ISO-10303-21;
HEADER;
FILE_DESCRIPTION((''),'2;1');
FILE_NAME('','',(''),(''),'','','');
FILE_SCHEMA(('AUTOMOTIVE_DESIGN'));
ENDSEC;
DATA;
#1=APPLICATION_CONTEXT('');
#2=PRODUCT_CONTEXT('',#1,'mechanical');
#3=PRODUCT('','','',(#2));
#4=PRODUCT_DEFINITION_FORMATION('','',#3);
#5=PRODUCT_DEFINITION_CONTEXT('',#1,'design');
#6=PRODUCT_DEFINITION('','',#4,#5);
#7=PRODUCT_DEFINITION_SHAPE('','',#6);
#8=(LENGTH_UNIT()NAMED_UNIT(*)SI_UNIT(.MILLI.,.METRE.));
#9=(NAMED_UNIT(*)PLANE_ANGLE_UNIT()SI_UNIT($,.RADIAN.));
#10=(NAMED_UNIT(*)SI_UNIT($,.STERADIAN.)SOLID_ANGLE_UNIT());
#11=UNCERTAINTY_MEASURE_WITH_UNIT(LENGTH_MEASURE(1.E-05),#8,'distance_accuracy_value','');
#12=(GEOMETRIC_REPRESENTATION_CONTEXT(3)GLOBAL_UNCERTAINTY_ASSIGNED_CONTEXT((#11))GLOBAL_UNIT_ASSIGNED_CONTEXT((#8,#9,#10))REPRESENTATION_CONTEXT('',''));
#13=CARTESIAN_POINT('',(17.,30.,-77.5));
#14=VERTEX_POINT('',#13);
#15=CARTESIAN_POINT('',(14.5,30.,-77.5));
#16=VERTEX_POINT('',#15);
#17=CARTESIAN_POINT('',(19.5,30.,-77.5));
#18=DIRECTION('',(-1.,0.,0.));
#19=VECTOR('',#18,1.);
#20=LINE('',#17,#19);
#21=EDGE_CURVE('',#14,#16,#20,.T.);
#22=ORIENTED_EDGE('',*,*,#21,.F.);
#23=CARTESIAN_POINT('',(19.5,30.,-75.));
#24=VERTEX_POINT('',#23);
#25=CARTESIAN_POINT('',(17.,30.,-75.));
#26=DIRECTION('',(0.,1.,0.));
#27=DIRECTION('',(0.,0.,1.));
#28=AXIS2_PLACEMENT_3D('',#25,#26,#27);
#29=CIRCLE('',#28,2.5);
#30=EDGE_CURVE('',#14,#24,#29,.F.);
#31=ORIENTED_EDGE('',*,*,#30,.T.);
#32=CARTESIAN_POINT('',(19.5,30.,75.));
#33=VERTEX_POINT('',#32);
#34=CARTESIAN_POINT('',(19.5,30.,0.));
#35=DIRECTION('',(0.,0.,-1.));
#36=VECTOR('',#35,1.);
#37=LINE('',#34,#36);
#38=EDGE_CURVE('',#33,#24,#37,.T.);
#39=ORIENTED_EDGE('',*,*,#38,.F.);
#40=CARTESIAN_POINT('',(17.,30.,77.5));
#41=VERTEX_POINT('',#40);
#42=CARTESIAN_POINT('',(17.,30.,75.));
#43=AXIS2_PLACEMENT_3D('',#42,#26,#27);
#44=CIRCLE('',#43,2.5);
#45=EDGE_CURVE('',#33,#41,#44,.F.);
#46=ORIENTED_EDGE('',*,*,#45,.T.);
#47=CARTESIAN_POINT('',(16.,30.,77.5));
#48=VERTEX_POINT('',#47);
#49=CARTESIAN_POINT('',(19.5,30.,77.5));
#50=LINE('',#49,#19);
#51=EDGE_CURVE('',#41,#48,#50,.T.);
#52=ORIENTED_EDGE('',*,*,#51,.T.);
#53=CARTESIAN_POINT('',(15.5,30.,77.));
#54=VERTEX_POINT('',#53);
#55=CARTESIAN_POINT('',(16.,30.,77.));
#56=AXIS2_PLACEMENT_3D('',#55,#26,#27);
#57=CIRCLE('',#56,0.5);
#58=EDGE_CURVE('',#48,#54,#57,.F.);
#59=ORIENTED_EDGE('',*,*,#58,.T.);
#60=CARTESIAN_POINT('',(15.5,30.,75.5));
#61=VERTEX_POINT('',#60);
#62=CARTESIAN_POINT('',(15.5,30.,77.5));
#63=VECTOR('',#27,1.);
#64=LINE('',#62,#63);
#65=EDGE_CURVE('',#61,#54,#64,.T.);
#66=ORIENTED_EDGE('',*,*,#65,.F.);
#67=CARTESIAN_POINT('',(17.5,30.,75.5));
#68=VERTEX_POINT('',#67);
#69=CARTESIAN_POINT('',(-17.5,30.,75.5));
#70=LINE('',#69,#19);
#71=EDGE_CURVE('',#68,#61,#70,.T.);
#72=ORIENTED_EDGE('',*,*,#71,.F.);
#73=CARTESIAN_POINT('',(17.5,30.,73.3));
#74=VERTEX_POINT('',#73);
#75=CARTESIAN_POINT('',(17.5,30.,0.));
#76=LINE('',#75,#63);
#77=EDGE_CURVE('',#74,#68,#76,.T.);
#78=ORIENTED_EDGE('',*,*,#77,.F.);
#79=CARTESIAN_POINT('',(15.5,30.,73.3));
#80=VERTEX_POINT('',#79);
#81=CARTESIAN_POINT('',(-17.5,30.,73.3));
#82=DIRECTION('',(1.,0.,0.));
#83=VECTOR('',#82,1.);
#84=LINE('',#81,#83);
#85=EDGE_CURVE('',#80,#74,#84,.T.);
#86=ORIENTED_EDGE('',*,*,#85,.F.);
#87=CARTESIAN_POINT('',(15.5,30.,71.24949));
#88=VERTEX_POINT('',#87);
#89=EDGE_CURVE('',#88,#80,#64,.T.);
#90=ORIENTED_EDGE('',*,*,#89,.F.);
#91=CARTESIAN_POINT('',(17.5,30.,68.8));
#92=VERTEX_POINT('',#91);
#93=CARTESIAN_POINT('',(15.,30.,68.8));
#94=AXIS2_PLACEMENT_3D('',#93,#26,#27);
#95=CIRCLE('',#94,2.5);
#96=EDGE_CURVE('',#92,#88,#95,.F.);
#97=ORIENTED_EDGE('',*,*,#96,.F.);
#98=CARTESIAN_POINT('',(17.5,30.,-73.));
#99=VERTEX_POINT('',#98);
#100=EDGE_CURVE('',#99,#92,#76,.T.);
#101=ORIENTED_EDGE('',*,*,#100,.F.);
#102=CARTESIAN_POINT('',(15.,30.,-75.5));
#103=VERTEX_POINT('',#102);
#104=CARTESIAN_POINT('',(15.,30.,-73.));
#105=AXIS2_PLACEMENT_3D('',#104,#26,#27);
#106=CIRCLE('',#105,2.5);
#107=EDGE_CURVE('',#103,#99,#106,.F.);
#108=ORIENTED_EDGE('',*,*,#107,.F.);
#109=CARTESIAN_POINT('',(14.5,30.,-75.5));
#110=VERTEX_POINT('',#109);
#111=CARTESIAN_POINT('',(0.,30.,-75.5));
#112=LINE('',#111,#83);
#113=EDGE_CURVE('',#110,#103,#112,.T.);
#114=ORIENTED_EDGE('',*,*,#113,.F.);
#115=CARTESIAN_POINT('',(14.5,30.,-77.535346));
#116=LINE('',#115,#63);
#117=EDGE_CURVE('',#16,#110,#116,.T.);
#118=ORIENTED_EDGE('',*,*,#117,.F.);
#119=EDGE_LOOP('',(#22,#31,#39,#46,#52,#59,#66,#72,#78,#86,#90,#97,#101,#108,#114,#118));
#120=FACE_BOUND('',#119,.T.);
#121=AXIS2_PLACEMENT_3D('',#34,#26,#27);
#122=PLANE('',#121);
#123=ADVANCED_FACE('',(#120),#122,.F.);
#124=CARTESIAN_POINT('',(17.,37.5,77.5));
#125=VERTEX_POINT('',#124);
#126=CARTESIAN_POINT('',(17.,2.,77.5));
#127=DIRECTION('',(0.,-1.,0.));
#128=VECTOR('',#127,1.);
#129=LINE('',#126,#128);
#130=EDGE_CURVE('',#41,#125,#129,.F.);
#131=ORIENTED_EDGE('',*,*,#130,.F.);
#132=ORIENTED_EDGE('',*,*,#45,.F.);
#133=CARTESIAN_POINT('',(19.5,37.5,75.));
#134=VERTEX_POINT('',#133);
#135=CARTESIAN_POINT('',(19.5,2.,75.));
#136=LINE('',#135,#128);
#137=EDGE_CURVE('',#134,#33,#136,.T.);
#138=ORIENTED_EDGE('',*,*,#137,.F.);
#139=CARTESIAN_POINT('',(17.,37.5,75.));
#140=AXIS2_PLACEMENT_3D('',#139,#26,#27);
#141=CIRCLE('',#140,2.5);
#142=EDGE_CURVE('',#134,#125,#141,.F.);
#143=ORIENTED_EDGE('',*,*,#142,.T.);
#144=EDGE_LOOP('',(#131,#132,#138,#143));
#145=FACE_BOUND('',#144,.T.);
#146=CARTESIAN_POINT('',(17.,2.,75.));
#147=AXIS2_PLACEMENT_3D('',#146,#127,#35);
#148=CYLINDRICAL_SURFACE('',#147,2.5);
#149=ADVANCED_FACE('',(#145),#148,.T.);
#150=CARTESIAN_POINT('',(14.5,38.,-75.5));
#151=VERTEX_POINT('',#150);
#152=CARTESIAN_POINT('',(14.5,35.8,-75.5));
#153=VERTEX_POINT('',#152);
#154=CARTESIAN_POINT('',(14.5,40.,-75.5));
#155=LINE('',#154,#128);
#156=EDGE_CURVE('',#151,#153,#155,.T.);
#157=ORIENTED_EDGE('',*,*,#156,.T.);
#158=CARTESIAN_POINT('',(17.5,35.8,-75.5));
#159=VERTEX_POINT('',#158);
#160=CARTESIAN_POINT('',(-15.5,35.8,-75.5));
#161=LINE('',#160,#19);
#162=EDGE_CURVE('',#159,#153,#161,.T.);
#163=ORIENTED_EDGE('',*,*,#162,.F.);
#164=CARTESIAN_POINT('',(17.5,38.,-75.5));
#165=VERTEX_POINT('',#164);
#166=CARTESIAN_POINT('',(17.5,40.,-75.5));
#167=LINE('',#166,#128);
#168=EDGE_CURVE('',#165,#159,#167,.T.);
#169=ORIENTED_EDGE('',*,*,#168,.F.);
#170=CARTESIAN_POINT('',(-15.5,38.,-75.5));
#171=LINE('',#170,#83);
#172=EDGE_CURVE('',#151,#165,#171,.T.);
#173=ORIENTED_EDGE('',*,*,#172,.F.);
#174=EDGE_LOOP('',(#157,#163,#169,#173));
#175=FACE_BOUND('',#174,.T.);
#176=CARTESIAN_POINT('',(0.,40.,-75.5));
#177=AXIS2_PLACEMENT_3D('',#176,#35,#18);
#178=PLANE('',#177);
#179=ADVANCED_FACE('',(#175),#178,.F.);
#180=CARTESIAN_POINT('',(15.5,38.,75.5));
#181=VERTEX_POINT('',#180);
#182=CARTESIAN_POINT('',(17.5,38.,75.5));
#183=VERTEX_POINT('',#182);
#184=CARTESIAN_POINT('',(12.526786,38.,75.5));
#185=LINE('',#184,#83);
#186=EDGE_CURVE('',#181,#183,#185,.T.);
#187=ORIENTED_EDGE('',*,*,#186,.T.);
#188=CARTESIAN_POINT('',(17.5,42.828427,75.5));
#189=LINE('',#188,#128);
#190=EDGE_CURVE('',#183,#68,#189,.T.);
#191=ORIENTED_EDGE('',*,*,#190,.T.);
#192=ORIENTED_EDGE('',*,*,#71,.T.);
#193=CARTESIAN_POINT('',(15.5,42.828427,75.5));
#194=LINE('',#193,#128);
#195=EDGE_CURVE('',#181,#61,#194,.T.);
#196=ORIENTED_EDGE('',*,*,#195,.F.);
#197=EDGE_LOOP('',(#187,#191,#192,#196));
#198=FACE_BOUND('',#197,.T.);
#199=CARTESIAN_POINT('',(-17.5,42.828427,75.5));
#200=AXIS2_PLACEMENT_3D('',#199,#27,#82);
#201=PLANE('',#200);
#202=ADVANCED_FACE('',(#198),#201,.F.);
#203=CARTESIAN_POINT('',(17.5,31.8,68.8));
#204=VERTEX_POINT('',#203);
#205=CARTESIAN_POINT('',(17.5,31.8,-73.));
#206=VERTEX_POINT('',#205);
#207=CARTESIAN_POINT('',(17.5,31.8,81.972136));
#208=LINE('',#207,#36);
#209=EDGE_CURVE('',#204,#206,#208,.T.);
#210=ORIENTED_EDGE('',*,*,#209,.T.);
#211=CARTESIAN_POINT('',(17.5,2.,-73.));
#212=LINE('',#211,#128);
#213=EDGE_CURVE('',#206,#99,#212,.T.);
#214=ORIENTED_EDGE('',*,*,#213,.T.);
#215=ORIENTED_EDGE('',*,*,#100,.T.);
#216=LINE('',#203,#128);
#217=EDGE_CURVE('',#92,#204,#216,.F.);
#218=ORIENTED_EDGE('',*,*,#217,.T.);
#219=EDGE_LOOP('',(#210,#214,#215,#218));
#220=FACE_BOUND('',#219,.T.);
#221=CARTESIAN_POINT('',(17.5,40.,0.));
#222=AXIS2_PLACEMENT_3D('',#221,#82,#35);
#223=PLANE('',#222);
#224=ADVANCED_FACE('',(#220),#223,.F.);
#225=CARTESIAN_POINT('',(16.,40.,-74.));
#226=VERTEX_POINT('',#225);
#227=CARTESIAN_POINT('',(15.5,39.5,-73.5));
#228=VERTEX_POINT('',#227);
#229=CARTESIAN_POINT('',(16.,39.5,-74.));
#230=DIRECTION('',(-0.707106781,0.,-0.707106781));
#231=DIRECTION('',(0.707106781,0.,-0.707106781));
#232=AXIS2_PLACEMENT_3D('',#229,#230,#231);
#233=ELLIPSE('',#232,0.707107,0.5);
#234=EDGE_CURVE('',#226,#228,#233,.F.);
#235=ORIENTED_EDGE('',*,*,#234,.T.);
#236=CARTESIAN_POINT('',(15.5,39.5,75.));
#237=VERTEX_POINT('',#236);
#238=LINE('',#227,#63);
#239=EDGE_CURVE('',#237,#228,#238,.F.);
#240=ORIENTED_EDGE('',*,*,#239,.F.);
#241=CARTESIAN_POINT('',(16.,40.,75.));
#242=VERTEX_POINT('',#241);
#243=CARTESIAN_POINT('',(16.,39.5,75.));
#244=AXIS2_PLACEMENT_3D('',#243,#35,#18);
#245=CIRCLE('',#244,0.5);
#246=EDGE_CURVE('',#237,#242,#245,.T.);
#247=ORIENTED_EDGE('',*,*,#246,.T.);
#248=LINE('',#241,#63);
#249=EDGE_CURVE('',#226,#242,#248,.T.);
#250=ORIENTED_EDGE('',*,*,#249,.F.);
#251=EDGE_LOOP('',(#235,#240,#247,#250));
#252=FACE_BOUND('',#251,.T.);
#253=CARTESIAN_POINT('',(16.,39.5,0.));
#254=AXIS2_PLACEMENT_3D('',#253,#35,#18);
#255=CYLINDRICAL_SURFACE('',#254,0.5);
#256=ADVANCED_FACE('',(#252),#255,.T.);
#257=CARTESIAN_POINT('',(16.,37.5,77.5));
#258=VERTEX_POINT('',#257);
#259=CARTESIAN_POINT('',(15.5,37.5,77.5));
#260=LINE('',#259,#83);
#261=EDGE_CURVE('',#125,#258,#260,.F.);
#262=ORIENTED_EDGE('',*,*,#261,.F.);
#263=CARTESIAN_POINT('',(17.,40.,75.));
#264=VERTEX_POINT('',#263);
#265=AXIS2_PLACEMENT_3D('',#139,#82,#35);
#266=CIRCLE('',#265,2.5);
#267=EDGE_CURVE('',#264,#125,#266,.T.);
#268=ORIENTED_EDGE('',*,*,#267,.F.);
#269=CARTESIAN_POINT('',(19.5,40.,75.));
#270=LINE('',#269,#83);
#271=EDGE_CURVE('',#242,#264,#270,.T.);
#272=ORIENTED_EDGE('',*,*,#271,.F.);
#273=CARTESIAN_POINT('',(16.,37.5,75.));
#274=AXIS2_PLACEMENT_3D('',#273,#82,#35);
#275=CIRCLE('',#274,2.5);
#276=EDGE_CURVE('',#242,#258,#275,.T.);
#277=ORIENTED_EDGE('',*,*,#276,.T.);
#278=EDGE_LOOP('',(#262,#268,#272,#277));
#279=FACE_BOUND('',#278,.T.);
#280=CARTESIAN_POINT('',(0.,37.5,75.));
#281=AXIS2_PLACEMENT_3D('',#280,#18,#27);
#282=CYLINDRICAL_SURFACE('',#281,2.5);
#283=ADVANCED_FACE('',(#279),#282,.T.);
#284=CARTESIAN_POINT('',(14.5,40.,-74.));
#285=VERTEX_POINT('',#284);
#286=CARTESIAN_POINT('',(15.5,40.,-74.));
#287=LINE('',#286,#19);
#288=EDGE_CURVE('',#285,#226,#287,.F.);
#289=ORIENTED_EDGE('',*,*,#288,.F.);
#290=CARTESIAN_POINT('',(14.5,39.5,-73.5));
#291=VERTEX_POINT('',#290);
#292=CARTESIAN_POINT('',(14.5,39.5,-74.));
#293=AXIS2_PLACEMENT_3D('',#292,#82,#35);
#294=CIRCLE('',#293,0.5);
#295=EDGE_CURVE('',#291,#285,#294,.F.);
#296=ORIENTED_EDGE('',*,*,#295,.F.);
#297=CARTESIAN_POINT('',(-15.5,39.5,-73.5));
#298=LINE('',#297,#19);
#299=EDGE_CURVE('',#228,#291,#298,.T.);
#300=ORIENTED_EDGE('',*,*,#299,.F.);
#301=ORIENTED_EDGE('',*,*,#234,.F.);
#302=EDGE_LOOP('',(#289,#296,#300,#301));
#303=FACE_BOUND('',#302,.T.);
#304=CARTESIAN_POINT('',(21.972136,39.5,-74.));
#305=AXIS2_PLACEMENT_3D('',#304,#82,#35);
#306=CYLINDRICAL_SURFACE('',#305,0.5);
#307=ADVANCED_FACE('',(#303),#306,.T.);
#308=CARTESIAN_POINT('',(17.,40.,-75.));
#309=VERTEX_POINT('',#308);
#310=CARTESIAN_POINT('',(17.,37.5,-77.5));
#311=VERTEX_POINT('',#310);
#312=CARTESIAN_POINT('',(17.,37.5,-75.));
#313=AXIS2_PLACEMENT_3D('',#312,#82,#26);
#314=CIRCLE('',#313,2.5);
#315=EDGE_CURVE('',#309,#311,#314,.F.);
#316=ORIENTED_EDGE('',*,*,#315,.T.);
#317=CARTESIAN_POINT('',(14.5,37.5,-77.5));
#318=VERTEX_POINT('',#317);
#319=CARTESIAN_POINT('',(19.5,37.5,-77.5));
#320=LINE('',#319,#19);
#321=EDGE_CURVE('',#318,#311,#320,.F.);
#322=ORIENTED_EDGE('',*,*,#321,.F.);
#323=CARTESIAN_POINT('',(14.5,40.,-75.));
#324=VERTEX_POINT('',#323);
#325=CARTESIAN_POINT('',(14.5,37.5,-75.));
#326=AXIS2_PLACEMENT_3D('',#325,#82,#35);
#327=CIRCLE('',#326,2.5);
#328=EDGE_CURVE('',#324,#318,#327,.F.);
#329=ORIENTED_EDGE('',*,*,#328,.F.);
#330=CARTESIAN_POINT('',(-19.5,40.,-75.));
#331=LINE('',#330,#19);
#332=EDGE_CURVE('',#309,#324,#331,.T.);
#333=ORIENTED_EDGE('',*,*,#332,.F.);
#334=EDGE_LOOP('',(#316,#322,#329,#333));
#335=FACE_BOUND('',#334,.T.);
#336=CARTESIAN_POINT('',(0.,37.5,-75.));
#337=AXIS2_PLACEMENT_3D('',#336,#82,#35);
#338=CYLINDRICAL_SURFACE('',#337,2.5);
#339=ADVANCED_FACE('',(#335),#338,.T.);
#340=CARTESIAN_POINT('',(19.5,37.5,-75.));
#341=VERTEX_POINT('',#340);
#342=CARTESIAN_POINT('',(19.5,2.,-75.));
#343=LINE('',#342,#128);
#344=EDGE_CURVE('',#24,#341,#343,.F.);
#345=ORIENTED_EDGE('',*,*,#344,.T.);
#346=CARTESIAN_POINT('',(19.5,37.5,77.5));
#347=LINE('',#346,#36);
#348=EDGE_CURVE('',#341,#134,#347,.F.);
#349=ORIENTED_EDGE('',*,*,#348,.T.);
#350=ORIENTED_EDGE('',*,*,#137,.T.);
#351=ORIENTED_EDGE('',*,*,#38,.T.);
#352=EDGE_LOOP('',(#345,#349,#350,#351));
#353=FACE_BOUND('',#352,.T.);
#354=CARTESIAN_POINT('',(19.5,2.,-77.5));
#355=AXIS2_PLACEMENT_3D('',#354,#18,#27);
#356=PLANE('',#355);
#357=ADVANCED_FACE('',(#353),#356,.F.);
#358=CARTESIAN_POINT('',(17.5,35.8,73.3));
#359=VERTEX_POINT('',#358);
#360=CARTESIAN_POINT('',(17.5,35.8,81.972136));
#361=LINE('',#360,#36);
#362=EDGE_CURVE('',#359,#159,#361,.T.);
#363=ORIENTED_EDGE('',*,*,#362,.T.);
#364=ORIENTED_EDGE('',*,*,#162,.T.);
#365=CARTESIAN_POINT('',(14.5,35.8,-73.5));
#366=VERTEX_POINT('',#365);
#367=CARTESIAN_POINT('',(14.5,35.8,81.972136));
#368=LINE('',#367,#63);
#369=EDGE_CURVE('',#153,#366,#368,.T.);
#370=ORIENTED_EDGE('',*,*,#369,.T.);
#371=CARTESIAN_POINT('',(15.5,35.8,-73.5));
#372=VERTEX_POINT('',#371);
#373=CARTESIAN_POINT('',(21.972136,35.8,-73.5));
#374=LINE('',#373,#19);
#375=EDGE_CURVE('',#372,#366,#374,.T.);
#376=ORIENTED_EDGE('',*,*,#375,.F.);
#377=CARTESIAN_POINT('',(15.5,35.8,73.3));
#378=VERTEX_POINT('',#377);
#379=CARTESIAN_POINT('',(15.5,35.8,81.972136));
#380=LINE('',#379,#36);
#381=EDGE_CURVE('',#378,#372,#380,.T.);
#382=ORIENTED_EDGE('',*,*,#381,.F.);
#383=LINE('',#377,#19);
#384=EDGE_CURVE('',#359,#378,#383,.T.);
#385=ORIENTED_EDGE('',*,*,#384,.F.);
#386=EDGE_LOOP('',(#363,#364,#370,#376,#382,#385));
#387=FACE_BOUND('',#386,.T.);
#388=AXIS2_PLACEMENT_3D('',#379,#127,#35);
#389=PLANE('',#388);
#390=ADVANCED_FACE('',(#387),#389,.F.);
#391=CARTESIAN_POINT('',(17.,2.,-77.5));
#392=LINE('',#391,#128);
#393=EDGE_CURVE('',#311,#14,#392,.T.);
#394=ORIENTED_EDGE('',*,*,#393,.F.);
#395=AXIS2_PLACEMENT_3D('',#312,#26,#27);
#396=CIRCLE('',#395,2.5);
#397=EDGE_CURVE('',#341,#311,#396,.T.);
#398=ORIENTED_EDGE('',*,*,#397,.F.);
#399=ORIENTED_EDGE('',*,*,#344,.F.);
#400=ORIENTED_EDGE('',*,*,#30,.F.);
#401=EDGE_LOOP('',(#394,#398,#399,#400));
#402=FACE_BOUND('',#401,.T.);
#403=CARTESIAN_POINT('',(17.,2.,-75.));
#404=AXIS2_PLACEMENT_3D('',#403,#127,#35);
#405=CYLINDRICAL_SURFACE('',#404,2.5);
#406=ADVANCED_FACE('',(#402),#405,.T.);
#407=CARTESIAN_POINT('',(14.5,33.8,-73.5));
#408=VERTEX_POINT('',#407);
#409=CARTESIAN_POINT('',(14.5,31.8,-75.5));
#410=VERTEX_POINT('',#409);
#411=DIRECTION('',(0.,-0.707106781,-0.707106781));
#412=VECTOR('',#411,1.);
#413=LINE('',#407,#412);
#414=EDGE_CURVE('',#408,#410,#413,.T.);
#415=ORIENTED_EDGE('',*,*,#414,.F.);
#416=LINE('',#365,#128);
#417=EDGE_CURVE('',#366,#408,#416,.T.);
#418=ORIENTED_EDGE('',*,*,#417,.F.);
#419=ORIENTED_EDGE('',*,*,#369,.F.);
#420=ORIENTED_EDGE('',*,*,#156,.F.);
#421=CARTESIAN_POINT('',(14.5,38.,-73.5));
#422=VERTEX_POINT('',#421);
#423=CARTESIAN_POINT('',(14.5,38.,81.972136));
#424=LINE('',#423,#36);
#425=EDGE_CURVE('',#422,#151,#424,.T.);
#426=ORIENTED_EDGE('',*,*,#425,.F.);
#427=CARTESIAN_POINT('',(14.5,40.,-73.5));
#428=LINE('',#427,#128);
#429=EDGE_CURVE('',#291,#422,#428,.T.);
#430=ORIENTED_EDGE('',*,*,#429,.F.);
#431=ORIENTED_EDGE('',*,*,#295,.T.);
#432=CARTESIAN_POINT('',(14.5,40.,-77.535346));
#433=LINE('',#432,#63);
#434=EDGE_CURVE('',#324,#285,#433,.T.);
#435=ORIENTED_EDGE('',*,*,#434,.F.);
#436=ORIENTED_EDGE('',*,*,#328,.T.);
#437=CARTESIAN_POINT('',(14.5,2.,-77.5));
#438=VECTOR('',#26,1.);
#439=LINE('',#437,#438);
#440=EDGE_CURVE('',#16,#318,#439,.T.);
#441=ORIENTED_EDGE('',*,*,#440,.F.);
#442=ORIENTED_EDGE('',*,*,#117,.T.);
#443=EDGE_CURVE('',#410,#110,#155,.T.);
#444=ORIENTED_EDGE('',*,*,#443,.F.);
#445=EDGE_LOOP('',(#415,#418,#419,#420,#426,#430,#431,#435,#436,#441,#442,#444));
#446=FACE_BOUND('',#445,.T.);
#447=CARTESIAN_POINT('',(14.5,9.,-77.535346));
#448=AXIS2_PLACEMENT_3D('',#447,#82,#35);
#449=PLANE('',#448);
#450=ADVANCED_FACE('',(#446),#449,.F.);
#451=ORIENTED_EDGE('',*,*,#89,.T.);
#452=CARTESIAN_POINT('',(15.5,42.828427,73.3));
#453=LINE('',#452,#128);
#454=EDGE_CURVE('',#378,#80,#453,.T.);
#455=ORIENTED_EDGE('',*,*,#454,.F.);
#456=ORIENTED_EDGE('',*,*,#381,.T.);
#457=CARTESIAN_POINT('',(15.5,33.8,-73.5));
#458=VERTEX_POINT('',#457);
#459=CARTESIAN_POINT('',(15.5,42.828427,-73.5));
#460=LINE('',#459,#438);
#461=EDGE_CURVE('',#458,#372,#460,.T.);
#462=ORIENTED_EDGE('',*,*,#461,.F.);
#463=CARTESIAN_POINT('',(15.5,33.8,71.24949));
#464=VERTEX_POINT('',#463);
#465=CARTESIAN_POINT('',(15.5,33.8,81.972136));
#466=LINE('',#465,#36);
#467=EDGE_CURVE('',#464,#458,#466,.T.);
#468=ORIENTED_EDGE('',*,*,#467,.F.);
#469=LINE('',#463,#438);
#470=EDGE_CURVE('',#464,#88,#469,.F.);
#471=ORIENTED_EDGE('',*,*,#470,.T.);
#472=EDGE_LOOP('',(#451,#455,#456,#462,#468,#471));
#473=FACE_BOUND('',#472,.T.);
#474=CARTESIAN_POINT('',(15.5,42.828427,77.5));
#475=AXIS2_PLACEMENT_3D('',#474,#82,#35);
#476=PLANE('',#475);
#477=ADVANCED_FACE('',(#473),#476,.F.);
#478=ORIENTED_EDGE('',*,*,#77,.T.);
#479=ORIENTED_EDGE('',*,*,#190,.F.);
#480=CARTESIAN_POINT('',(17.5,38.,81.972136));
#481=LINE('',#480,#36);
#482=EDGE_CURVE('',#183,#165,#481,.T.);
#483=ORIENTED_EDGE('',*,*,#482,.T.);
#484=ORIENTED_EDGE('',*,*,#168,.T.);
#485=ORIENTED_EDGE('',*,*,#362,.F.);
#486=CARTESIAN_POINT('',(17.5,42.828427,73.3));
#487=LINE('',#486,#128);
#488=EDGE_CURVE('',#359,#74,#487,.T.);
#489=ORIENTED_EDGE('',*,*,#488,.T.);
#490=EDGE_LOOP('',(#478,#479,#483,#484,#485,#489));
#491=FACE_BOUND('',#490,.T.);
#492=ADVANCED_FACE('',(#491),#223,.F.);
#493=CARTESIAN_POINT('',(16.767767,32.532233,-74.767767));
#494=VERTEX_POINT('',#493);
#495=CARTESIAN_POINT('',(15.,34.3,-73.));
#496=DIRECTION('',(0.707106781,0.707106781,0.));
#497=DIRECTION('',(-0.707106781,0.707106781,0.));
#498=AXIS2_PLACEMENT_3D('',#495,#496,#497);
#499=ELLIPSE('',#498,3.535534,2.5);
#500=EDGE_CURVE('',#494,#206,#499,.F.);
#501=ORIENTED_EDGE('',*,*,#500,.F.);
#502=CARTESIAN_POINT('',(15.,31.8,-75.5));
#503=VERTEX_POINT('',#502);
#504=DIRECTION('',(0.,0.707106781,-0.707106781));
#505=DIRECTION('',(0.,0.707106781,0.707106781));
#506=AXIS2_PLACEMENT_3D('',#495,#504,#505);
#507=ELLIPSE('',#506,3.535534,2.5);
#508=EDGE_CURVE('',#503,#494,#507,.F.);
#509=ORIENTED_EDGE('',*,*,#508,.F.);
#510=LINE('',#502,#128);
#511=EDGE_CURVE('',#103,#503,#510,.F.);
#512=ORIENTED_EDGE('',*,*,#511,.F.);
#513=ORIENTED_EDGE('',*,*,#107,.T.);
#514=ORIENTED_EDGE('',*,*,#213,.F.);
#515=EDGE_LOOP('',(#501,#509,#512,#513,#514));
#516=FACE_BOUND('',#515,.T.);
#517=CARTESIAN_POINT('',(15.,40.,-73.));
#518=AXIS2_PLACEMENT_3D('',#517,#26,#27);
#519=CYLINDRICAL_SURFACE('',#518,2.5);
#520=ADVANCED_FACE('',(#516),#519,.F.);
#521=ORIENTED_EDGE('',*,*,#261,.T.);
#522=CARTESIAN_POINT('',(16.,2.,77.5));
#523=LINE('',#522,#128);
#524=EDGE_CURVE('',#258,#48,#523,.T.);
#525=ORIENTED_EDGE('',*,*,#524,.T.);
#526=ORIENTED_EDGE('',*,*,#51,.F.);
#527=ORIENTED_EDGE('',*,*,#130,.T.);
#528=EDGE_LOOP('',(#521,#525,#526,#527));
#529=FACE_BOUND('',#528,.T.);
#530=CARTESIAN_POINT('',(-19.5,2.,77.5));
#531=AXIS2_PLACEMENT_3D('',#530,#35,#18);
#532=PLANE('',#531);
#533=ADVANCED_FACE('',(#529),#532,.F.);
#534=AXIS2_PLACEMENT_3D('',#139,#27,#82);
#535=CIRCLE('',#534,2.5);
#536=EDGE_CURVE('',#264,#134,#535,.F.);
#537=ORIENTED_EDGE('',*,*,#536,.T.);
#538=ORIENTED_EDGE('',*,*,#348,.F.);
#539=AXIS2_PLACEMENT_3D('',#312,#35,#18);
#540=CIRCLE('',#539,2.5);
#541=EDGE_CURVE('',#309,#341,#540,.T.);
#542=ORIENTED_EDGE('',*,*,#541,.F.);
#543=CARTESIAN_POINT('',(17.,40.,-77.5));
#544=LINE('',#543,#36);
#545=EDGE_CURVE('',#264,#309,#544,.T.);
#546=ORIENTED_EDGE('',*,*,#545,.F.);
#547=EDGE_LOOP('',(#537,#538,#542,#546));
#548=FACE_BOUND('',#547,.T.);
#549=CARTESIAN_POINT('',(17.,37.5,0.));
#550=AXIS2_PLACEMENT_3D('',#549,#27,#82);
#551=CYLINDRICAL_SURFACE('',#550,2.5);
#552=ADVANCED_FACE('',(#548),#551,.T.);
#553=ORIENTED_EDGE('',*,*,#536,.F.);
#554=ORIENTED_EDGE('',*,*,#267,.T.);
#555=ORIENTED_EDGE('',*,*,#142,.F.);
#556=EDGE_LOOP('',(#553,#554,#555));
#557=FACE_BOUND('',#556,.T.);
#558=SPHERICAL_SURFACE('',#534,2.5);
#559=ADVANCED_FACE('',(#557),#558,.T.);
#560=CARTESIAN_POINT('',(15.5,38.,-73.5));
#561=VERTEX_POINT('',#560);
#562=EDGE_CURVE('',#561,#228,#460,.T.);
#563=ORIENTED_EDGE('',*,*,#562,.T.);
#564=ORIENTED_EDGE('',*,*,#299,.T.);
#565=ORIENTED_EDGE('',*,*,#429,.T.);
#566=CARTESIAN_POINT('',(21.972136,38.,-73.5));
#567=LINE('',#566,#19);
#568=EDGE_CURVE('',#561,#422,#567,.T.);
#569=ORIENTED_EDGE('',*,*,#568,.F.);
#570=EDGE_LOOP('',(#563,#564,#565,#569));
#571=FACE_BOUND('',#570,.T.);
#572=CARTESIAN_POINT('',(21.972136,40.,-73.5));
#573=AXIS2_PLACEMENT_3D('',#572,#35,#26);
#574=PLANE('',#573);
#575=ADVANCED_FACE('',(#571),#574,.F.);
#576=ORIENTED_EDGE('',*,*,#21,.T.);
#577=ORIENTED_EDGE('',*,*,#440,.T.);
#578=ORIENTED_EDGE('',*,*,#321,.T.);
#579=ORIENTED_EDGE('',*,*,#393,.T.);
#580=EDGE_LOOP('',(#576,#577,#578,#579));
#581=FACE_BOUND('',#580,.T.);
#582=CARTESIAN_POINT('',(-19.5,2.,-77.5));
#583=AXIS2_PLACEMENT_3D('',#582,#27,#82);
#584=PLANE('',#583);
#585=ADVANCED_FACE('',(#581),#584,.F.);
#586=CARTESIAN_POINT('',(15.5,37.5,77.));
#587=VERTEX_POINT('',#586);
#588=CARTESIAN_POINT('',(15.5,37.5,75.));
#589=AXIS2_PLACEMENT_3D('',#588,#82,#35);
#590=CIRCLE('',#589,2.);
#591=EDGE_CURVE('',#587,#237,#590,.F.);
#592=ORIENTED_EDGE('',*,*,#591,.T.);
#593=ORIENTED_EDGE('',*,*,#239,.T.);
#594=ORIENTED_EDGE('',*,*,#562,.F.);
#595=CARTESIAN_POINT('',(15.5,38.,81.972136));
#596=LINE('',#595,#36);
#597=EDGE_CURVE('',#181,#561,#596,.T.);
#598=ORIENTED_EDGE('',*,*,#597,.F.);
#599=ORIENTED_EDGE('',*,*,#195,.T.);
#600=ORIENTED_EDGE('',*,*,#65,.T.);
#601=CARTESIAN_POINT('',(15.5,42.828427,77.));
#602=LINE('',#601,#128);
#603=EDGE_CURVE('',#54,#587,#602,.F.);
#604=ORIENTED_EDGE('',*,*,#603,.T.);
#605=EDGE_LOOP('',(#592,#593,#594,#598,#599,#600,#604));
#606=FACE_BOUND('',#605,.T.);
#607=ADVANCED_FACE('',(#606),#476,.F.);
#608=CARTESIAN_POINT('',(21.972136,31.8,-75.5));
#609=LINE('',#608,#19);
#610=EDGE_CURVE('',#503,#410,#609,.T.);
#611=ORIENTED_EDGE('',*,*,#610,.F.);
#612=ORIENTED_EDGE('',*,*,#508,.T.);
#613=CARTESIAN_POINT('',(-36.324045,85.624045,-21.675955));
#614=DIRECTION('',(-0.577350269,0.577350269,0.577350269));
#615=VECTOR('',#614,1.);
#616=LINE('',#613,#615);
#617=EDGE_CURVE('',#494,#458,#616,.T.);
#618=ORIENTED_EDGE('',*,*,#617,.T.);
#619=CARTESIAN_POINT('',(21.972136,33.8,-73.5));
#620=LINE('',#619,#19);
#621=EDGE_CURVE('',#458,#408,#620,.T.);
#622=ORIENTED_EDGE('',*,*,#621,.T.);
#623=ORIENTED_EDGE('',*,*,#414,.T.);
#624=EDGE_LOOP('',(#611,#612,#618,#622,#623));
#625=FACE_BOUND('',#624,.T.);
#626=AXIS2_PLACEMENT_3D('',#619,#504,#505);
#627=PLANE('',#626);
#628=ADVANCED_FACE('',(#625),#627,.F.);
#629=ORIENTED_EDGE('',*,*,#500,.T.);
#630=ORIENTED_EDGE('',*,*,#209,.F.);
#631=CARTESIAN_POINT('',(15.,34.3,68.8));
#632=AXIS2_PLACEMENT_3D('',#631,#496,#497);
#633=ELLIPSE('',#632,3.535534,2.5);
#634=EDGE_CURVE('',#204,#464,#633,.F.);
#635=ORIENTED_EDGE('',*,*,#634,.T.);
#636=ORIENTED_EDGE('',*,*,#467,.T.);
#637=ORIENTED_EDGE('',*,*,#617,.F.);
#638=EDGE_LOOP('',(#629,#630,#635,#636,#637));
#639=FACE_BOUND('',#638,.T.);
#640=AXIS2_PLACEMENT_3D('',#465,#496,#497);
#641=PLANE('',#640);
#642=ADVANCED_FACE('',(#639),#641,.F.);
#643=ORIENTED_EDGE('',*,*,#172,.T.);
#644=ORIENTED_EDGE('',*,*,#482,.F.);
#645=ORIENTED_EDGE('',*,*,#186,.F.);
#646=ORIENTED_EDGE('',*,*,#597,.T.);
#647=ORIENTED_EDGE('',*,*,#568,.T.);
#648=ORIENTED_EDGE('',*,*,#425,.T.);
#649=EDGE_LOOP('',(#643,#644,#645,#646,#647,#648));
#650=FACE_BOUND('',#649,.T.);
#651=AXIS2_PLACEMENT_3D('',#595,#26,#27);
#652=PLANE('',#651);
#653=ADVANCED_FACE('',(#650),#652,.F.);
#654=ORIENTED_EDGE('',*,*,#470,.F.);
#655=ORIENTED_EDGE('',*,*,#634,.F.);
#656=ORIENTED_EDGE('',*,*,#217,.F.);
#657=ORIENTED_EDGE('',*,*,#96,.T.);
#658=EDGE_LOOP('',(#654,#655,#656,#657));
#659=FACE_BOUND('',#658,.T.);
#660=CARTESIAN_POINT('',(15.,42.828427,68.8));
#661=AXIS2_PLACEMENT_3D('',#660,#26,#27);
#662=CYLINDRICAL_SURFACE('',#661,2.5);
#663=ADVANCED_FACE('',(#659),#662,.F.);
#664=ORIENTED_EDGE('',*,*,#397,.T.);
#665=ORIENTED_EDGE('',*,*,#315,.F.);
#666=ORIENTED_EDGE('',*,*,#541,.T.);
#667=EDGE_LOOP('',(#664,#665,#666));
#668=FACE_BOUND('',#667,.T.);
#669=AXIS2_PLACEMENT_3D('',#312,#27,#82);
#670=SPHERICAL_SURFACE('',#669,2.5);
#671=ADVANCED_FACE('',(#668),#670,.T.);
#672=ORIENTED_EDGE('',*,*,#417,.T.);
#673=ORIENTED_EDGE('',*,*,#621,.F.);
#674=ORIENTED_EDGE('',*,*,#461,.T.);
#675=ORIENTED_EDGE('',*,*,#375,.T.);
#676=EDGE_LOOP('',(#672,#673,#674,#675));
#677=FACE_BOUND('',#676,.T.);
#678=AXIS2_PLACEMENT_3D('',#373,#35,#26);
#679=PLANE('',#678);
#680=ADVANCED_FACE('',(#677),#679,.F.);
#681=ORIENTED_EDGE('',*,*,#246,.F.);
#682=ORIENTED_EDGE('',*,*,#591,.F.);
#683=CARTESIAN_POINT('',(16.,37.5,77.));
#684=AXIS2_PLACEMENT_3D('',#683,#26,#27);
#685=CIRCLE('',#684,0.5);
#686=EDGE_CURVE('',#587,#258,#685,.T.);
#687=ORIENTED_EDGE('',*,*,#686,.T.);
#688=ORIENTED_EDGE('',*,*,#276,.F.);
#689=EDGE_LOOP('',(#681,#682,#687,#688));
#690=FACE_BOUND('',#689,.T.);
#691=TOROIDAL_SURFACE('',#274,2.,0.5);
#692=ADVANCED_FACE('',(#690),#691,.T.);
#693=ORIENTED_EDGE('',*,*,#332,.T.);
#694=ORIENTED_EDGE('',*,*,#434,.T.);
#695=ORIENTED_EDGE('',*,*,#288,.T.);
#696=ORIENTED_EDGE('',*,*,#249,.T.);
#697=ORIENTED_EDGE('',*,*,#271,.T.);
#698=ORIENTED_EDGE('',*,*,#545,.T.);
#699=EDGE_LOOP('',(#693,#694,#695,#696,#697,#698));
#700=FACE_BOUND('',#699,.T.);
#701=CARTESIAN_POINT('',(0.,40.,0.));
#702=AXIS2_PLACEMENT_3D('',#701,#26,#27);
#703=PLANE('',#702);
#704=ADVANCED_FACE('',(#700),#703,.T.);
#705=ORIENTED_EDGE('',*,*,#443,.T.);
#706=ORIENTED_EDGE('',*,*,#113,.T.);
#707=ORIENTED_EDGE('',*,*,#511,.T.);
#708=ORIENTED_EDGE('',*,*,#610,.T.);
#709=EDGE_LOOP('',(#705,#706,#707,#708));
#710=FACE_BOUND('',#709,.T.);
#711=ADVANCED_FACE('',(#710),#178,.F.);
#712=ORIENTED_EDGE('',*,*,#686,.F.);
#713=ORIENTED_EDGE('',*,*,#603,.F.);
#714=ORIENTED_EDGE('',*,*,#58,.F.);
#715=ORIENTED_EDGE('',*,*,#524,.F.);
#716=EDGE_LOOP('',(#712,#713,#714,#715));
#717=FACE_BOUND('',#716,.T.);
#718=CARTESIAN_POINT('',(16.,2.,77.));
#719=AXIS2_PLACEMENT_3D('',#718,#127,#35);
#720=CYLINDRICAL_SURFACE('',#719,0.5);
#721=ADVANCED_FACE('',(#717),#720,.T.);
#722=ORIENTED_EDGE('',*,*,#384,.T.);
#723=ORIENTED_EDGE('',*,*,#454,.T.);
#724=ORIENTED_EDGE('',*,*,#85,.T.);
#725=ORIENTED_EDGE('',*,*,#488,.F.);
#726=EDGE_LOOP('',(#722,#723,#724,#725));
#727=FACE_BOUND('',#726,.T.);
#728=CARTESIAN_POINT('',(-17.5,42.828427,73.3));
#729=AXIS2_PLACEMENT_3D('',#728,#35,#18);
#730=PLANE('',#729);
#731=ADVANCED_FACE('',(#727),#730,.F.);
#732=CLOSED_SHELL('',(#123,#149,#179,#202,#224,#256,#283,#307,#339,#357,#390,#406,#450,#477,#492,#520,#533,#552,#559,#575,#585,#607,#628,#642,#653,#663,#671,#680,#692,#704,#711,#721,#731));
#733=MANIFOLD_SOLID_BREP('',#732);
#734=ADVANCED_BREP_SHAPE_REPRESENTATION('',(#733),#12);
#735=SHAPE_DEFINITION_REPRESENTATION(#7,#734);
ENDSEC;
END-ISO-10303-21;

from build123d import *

# Parameters (mm, degrees)
SKETCH1_W                       = 39
SKETCH1_H                       = 155
BOSS_EXTRUDE1_DEPTH             = 2
BOSS_EXTRUDE2_DEPTH             = 38
SKETCH3_W                       = 2
SKETCH3_H                       = 2
BOSS_EXTRUDE3_DEPTH             = 38
SKETCH4_W                       = 2
SKETCH4_H                       = 2
BOSS_EXTRUDE4_DEPTH             = 151
SKETCH6_W                       = 35
SKETCH6_H                       = 2.2
CUT_EXTRUDE1_DEPTH              = 160.340045186
SKETCH7_W                       = 35
SKETCH7_H                       = 2.2
CUT_EXTRUDE2_DEPTH              = 89.490112442
SKETCH5_W                       = 31
SKETCH5_H                       = 2
BOSS_EXTRUDE5_DEPTH             = 2
BOSS_EXTRUDE6_REACH             = 91.367
SKETCH8_W                       = 2
SKETCH8_H                       = 2
BOSS_EXTRUDE6_DIRECTION_2_REACH = 91.367
SKETCH10_W                      = 2
SKETCH10_H                      = 2.2
SKETCH10_W_2                    = 2.2
SKETCH10_H_2                    = 2
BOSS_EXTRUDE8_DEPTH             = 2
SKETCH11_W                      = 2
SKETCH11_H                      = 2.2
SKETCH11_W_2                    = 2.2
SKETCH11_H_2                    = 2
BOSS_EXTRUDE9_DEPTH             = 2
FILLET2_R                       = 2.5
SKETCH14_W                      = 36.5
SKETCH14_H                      = 7.75
BOSS_EXTRUDE10_DEPTH            = 2
SKETCH13_W                      = 31
SKETCH13_H                      = 3
CUT_EXTRUDE4_DEPTH              = 2
FILLET3_R                       = 2
FILLET4_R                       = 0.5
SKETCH15_R                      = 5.1
CUT_EXTRUDE5_DEPTH              = 90.367219941
SKETCH16_R                      = 7.1
BOSS_EXTRUDE11_DEPTH            = 1
FILLET5_R                       = 0.5
CUT_EXTRUDE3_DEPTH              = 160.340045186
FILLET6_R                       = 0.4
FILLET7_R                       = 0.5
CUT_EXTRUDE6_DEPTH              = 6
SKETCH18_W                      = 29
SKETCH18_H                      = 3
CUT_EXTRUDE8_DEPTH              = 90.367220028
CUT_EXTRUDE11_DEPTH             = 90.367220028
CUT_EXTRUDE11_DEPTH_BACK        = 90.367220028
SKETCH20_W                      = 29
SKETCH20_H                      = 34
SKETCH21_W                      = 155
SKETCH21_H                      = 20
SKETCH21_H_2                    = 10
CUT_EXTRUDE12_DEPTH             = 90.367219941


with BuildPart() as part:
    # Sketch1 → Boss-Extrude1 (new body)
    with BuildSketch(Plane(origin=(0, 0, 0), x_dir=(1, 0, 0), z_dir=(0, 1, 0))):
        Rectangle(SKETCH1_W, SKETCH1_H)
    extrude(amount=BOSS_EXTRUDE1_DEPTH)

    # Sketch2 → Boss-Extrude2 (add)
    with BuildSketch(Plane(origin=(0, 2, 0), x_dir=(1, 0, 0), z_dir=(0, 1, 0))):
        Polygon((-17.5, -77.5), (-17.5, -75.5), (-17.5, 75.5), (17.5, 75.5), (17.5, -75.5), (17.5, -77.5), (19.5, -77.5), (19.5, 77.5), (-19.5, 77.5), (-19.5, -77.5), align=None)
    extrude(amount=BOSS_EXTRUDE2_DEPTH)

    # Sketch3 → Boss-Extrude3 (add)
    with BuildSketch(Plane(origin=(0, 2, 0), x_dir=(1, 0, 0), z_dir=(0, 1, 0))):
        with Locations((-16.5, -76.5)):
            Rectangle(SKETCH3_W, SKETCH3_H)
        with Locations((-16.5, -72.3)):
            Rectangle(SKETCH3_W, SKETCH3_H)
        with Locations((16.5, -76.5)):
            Rectangle(SKETCH3_W, SKETCH3_H)
        with Locations((16.5, -72.3)):
            Rectangle(SKETCH3_W, SKETCH3_H)
    extrude(amount=BOSS_EXTRUDE3_DEPTH)

    # Sketch4 → Boss-Extrude4 (add)
    with BuildSketch(Plane.XY.offset(-75.5)):
        with Locations((-16.5, 39)):
            Rectangle(SKETCH4_W, SKETCH4_H)
        Polygon((-15.5, 33.8), (-17.5, 31.8), (-17.5, 35.8), (-15.5, 35.8), align=None)
        Polygon((15.5, 35.8), (17.5, 35.8), (17.5, 31.8), (15.5, 33.8), align=None)
        with Locations((16.5, 39)):
            Rectangle(SKETCH4_W, SKETCH4_H)
    extrude(amount=BOSS_EXTRUDE4_DEPTH)

    # Sketch6 → Cut-Extrude1 (cut, through all)
    with BuildSketch(Plane.XY.offset(-75.5)):
        with Locations((0, 36.9)):
            Rectangle(SKETCH6_W, SKETCH6_H)
    extrude(amount=CUT_EXTRUDE1_DEPTH, mode=Mode.SUBTRACT)

    # Sketch7 → Cut-Extrude2 (cut, through all)
    with BuildSketch(Plane(origin=(0, 2, 0), x_dir=(1, 0, 0), z_dir=(0, 1, 0))):
        with Locations((0, -74.4)):
            Rectangle(SKETCH7_W, SKETCH7_H)
    extrude(amount=CUT_EXTRUDE2_DEPTH, mode=Mode.SUBTRACT)

    # Sketch5 → Boss-Extrude5 (add)
    with BuildSketch(Plane(origin=(0, 2, 0), x_dir=(1, 0, 0), z_dir=(0, 1, 0))):
        with Locations((0, -76.5)):
            Rectangle(SKETCH5_W, SKETCH5_H)
        with Locations((0, -72.3)):
            Rectangle(SKETCH5_W, SKETCH5_H)
    extrude(amount=BOSS_EXTRUDE5_DEPTH)

    # Boss-Extrude6: up to this face of the body (flat: up to its plane)
    boss_extrude6_end = Plane(part.part.faces().sort_by_distance((17.5, 16.9, -2.1))[0])
    # Sketch8 → Boss-Extrude6 (add, up to the picked face)
    with BuildSketch(Plane(origin=(0, 0, 0), x_dir=(0, 0, -1), z_dir=(1, 0, 0)), mode=Mode.PRIVATE) as boss_extrude6_sk1:
        with Locations((74.5, 39)):
            Rectangle(SKETCH8_W, SKETCH8_H)
    boss_extrude6_tool1 = split(extrude(boss_extrude6_sk1.sketch, amount=BOSS_EXTRUDE6_REACH, mode=Mode.PRIVATE), bisect_by=boss_extrude6_end, keep=Keep.BOTH, mode=Mode.PRIVATE)
    # Sketch8 → Boss-Extrude6 (add, up to the picked face)
    with BuildSketch(Plane(origin=(0, 0, 0), x_dir=(0, 0, -1), z_dir=(1, 0, 0)), mode=Mode.PRIVATE) as boss_extrude6_sk2:
        Polygon((75.5, 35.8), (73.5, 35.8), (73.5, 33.8), (75.5, 31.8), align=None)
    boss_extrude6_tool2 = split(extrude(boss_extrude6_sk2.sketch, amount=BOSS_EXTRUDE6_REACH, mode=Mode.PRIVATE), bisect_by=boss_extrude6_end, keep=Keep.BOTH, mode=Mode.PRIVATE)
    add(boss_extrude6_tool1.solids().sort_by(Axis((0, 39, -74.5), (1, 0, 0)))[0])
    add(boss_extrude6_tool2.solids().sort_by(Axis((0, 34.244444, -74.611111), (1, 0, 0)))[0])

    # Boss-Extrude6 direction 2: up to this face of the body (flat: up to its plane)
    boss_extrude6_direction_2_end = Plane(part.part.faces().sort_by_distance((-17.5, 16.9, -2.1))[0])
    # Sketch8 → Boss-Extrude6 direction 2 (add, up to the picked face)
    with BuildSketch(Plane(origin=(0, 0, 0), x_dir=(0, 0, -1), z_dir=(1, 0, 0)), mode=Mode.PRIVATE) as boss_extrude6_direction_2_sk1:
        with Locations((74.5, 39)):
            Rectangle(SKETCH8_W, SKETCH8_H)
    boss_extrude6_direction_2_tool1 = split(extrude(boss_extrude6_direction_2_sk1.sketch, amount=-BOSS_EXTRUDE6_DIRECTION_2_REACH, mode=Mode.PRIVATE), bisect_by=boss_extrude6_direction_2_end, keep=Keep.BOTH, mode=Mode.PRIVATE)
    # Sketch8 → Boss-Extrude6 direction 2 (add, up to the picked face)
    with BuildSketch(Plane(origin=(0, 0, 0), x_dir=(0, 0, -1), z_dir=(1, 0, 0)), mode=Mode.PRIVATE) as boss_extrude6_direction_2_sk2:
        Polygon((75.5, 35.8), (73.5, 35.8), (73.5, 33.8), (75.5, 31.8), align=None)
    boss_extrude6_direction_2_tool2 = split(extrude(boss_extrude6_direction_2_sk2.sketch, amount=-BOSS_EXTRUDE6_DIRECTION_2_REACH, mode=Mode.PRIVATE), bisect_by=boss_extrude6_direction_2_end, keep=Keep.BOTH, mode=Mode.PRIVATE)
    add(boss_extrude6_direction_2_tool1.solids().sort_by(Axis((0, 39, -74.5), (-1, 0, 0)))[0])
    add(boss_extrude6_direction_2_tool2.solids().sort_by(Axis((0, 34.244444, -74.611111), (-1, 0, 0)))[0])

    # Sketch10 → Boss-Extrude8 (add)
    with BuildSketch(Plane(origin=(-17.5, 0, 0), x_dir=(0, 0, -1), z_dir=(1, 0, 0))):
        with Locations((-76.5, 36.9)):
            Rectangle(SKETCH10_W, SKETCH10_H)
        with Locations((-74.4, 39)):
            Rectangle(SKETCH10_W_2, SKETCH10_H_2)
    extrude(amount=BOSS_EXTRUDE8_DEPTH)

    # Sketch11 → Boss-Extrude9 (add)
    with BuildSketch(Plane.ZY.offset(-17.5)):
        with Locations((76.5, 36.9)):
            Rectangle(SKETCH11_W, SKETCH11_H)
        with Locations((74.4, 39)):
            Rectangle(SKETCH11_W_2, SKETCH11_H_2)
    extrude(amount=BOSS_EXTRUDE9_DEPTH)

    # Fillet2
    fillet2_edges = [part.edges().sort_by_distance(p)[0] for p in [
        (-17.5, 16.9, 71.3),
        (17.5, 16.9, 71.3),
        (19.5, 20, 77.5),
        (-19.5, 20, 77.5),
        (-19.5, 20, -77.5),
        (-17.5, 16.9, -75.5),
        (17.5, 16.9, -75.5),
        (19.5, 20, -77.5),
        (19.5, 40, 0),
        (-19.5, 40, 0),
        (19.5, 0, 0),
        (-19.5, 0, 0),
        (0, 40, -77.5),
        (0, 0, 77.5),
        (0, 0, -77.5),
        (-17.5, 40, 77.5),
        (17.5, 40, 77.5),
    ]]
    fillet(fillet2_edges, radius=FILLET2_R)

    # Sketch14 → Boss-Extrude10 (add)
    with BuildSketch(Plane.XY.offset(-75.5)):
        with Locations((0, 5.125)):
            Rectangle(SKETCH14_W, SKETCH14_H)
    extrude(amount=BOSS_EXTRUDE10_DEPTH)

    # Sketch13 → Cut-Extrude4 (cut)
    with BuildSketch(Plane(origin=(0, 0, -77.5), x_dir=(-1, 0, 0), z_dir=(0, 0, -1))):
        with Locations((0, 5.5)):
            Rectangle(SKETCH13_W, SKETCH13_H)
    extrude(amount=-CUT_EXTRUDE4_DEPTH, mode=Mode.SUBTRACT)

    # Fillet3
    fillet3_edges = [part.edges().sort_by_distance(p)[0] for p in [
        (0, 9, -73.5),
    ]]
    fillet(fillet3_edges, radius=FILLET3_R - 0.0001)  # a hair under: the kernel refuses the full size

    # Fillet4
    fillet4_edges = [part.edges().sort_by_distance(p)[0] for p in [
        (15.5, 5.5, -75.5),
        (15.5, 4, -76.5),
        (0, 7, -75.5),
        (15.5, 7, -76.5),
        (-15.5, 5.5, -75.5),
        (-15.5, 7, -76.5),
        (0, 4, -75.5),
        (-15.5, 4, -76.5),
        (15.5, 5.5, -77.5),
        (0, 4, -77.5),
        (-15.5, 5.5, -77.5),
        (0, 7, -77.5),
    ]]
    fillet(fillet4_edges, radius=FILLET4_R)

    # Sketch15 → Cut-Extrude5 (cut, through all)
    with BuildSketch(Plane.XZ):
        with Locations(Location((0, 38.75, 0), (0, 0, 270))):
            Circle(SKETCH15_R)
        with Locations(Location((0, -38.75, 0), (0, 0, 270))):
            Circle(SKETCH15_R)
    extrude(amount=-CUT_EXTRUDE5_DEPTH, mode=Mode.SUBTRACT)

    # Sketch16 → Boss-Extrude11 (add)
    with BuildSketch(Plane(origin=(0, 2, 0), x_dir=(1, 0, 0), z_dir=(0, 1, 0))):
        with Locations(Location((0, 38.75, 0), (0, 0, 270))):
            Circle(SKETCH16_R)
        with Locations(Location((0, -38.75, 0), (0, 0, 270))):
            Circle(SKETCH16_R)
    extrude(amount=BOSS_EXTRUDE11_DEPTH)

    # Fillet5
    fillet5_edges = [part.edges().sort_by_distance(p)[0] for p in [
        (0, 2, -45.85),
        (0, 3, -45.85),
        (0, 2, 31.65),
        (0, 3, 31.65),
    ]]
    fillet(fillet5_edges, radius=FILLET5_R - 0.0001)  # a hair under: the kernel refuses the full size

    # Sketch12 → Cut-Extrude3 (cut, through all)
    with BuildSketch(Plane.XY.offset(-75.5)):
        with BuildLine():
            Line((1.668907005, 12.688040659), (2.22520934, 10.250720878))
            ThreePointArc((2.22520934, 10.250720878), (4.338837391, 10.990311321), (6.234898019, 12.181685175))
            Line((6.234898019, 12.181685175), (4.676173514, 14.136263881))
            ThreePointArc((4.676173514, 14.136263881), (3.254128043, 13.242733491), (1.668907005, 12.688040659))
        make_face()
        with BuildLine():
            ThreePointArc((-6.234898019, 12.181685175), (-4.338837391, 10.990311321), (-2.22520934, 10.250720878))
            Line((-2.22520934, 10.250720878), (-1.668907005, 12.688040659))
            ThreePointArc((-1.668907005, 12.688040659), (-3.254128043, 13.242733491), (-4.676173514, 14.136263881))
            Line((-4.676173514, 14.136263881), (-6.234898019, 12.181685175))
        make_face()
        with BuildLine():
            ThreePointArc((-10, 20), (-9.749279122, 17.77479066), (-9.009688679, 15.661162609))
            Line((-9.009688679, 15.661162609), (-6.757266509, 16.745871957))
            ThreePointArc((-6.757266509, 16.745871957), (-7.311959341, 18.331092995), (-7.5, 20))
            Line((-7.5, 20), (-10, 20))
        make_face()
        with BuildLine():
            ThreePointArc((-6.234898019, 27.818314825), (-7.818314825, 26.234898019), (-9.009688679, 24.338837391))
            Line((-9.009688679, 24.338837391), (-6.757266509, 23.254128043))
            ThreePointArc((-6.757266509, 23.254128043), (-5.863736119, 24.676173514), (-4.676173514, 25.863736119))
            Line((-4.676173514, 25.863736119), (-6.234898019, 27.818314825))
        make_face()
        with BuildLine():
            ThreePointArc((-1.668907005, 27.311959341), (-0.839733571, 27.452841574), (0, 27.5))
            Line((0, 27.5), (0, 30))
            ThreePointArc((0, 30), (-1.119644761, 29.937122099), (-2.22520934, 29.749279122))
            Line((-2.22520934, 29.749279122), (-1.668907005, 27.311959341))
        make_face()
        with BuildLine():
            Line((0, 30), (0, 27.5))
            ThreePointArc((0, 27.5), (0.839733571, 27.452841574), (1.668907005, 27.311959341))
            Line((1.668907005, 27.311959341), (2.22520934, 29.749279122))
            ThreePointArc((2.22520934, 29.749279122), (1.119644761, 29.937122099), (0, 30))
        make_face()
        with BuildLine():
            Line((6.757266509, 23.254128043), (9.009688679, 24.338837391))
            ThreePointArc((9.009688679, 24.338837391), (7.818314825, 26.234898019), (6.234898019, 27.818314825))
            Line((6.234898019, 27.818314825), (4.676173514, 25.863736119))
            ThreePointArc((4.676173514, 25.863736119), (5.863736119, 24.676173514), (6.757266509, 23.254128043))
        make_face()
        with BuildLine():
            Line((6.757266509, 16.745871957), (9.009688679, 15.661162609))
            ThreePointArc((9.009688679, 15.661162609), (9.749279122, 17.77479066), (10, 20))
            Line((10, 20), (7.5, 20))
            ThreePointArc((7.5, 20), (7.311959341, 18.331092995), (6.757266509, 16.745871957))
        make_face()
        with BuildLine():
            ThreePointArc((2.5, 20), (2.43731978, 19.443697665), (2.25242217, 18.915290652))
            Line((2.25242217, 18.915290652), (4.50484434, 17.830581304))
            ThreePointArc((4.50484434, 17.830581304), (4.874639561, 18.88739533), (5, 20))
            Line((5, 20), (2.5, 20))
        make_face()
        with BuildLine():
            ThreePointArc((1.558724505, 21.954578706), (1.954578706, 21.558724505), (2.25242217, 21.084709348))
            Line((2.25242217, 21.084709348), (4.50484434, 22.169418696))
            ThreePointArc((4.50484434, 22.169418696), (3.909157412, 23.117449009), (3.117449009, 23.909157412))
            Line((3.117449009, 23.909157412), (1.558724505, 21.954578706))
        make_face()
        with BuildLine():
            Line((0, 25), (0, 22.5))
            ThreePointArc((0, 22.5), (0.27991119, 22.484280525), (0.556302335, 22.43731978))
            Line((0.556302335, 22.43731978), (1.11260467, 24.874639561))
            ThreePointArc((1.11260467, 24.874639561), (0.559822381, 24.968561049), (0, 25))
        make_face()
        with BuildLine():
            ThreePointArc((-0.556302335, 22.43731978), (-0.27991119, 22.484280525), (0, 22.5))
            Line((0, 22.5), (0, 25))
            ThreePointArc((0, 25), (-0.559822381, 24.968561049), (-1.11260467, 24.874639561))
            Line((-1.11260467, 24.874639561), (-0.556302335, 22.43731978))
        make_face()
        with BuildLine():
            ThreePointArc((-2.25242217, 21.084709348), (-1.954578706, 21.558724505), (-1.558724505, 21.954578706))
            Line((-1.558724505, 21.954578706), (-3.117449009, 23.909157412))
            ThreePointArc((-3.117449009, 23.909157412), (-3.909157412, 23.117449009), (-4.50484434, 22.169418696))
            Line((-4.50484434, 22.169418696), (-2.25242217, 21.084709348))
        make_face()
        with BuildLine():
            ThreePointArc((-2.25242217, 18.915290652), (-2.43731978, 19.443697665), (-2.5, 20))
            Line((-2.5, 20), (-5, 20))
            ThreePointArc((-5, 20), (-4.874639561, 18.88739533), (-4.50484434, 17.830581304))
            Line((-4.50484434, 17.830581304), (-2.25242217, 18.915290652))
        make_face()
        with BuildLine():
            ThreePointArc((-3.117449009, 16.090842588), (-2.169418696, 15.49515566), (-1.11260467, 15.125360439))
            Line((-1.11260467, 15.125360439), (-0.556302335, 17.56268022))
            ThreePointArc((-0.556302335, 17.56268022), (-1.084709348, 17.74757783), (-1.558724505, 18.045421294))
            Line((-1.558724505, 18.045421294), (-3.117449009, 16.090842588))
        make_face()
        with BuildLine():
            Line((0.556302335, 17.56268022), (1.11260467, 15.125360439))
            ThreePointArc((1.11260467, 15.125360439), (2.169418696, 15.49515566), (3.117449009, 16.090842588))
            Line((3.117449009, 16.090842588), (1.558724505, 18.045421294))
            ThreePointArc((1.558724505, 18.045421294), (1.084709348, 17.74757783), (0.556302335, 17.56268022))
        make_face()
    extrude(amount=-CUT_EXTRUDE3_DEPTH, mode=Mode.SUBTRACT)

    # Fillet6
    fillet6_edges = [part.edges().sort_by_distance(p)[0] for p in [
        (5.863736119, 24.676173514, -75.5),
        (5.455535766, 26.841025472, -75.5),
        (7.818314825, 26.234898019, -77.5),
        (7.883477594, 23.796482717, -77.5),
        (5.863736119, 24.676173514, -77.5),
        (5.455535766, 26.841025472, -77.5),
        (7.883477594, 23.796482717, -75.5),
        (7.818314825, 26.234898019, -75.5),
        (7.311959341, 18.331092995, -75.5),
        (8.75, 20, -75.5),
        (9.749279122, 17.77479066, -77.5),
        (7.883477594, 16.203517283, -77.5),
        (7.311959341, 18.331092995, -77.5),
        (8.75, 20, -77.5),
        (7.883477594, 16.203517283, -75.5),
        (9.749279122, 17.77479066, -75.5),
        (2.43731978, 19.443697665, -75.5),
        (3.75, 20, -75.5),
        (4.874639561, 18.88739533, -77.5),
        (3.378633255, 18.372935978, -77.5),
        (2.43731978, 19.443697665, -77.5),
        (3.75, 20, -77.5),
        (3.378633255, 18.372935978, -75.5),
        (4.874639561, 18.88739533, -75.5),
        (1.954578706, 21.558724505, -75.5),
        (2.338086757, 22.931868059, -75.5),
        (3.909157412, 23.117449009, -77.5),
        (3.378633255, 21.627064022, -77.5),
        (1.954578706, 21.558724505, -77.5),
        (2.338086757, 22.931868059, -77.5),
        (3.378633255, 21.627064022, -75.5),
        (3.909157412, 23.117449009, -75.5),
        (0, 27.5, -75.5),
        (-1.947058172, 28.530619232, -75.5),
        (0, 30, -77.5),
        (1.947058172, 28.530619232, -77.5),
        (0, 27.5, -77.5),
        (-1.947058172, 28.530619232, -77.5),
        (1.947058172, 28.530619232, -75.5),
        (0, 30, -75.5),
        (-5.863736119, 24.676173514, -75.5),
        (-7.883477594, 23.796482717, -75.5),
        (-7.818314825, 26.234898019, -77.5),
        (-5.455535766, 26.841025472, -77.5),
        (-5.863736119, 24.676173514, -77.5),
        (-7.883477594, 23.796482717, -77.5),
        (-5.455535766, 26.841025472, -75.5),
        (-7.818314825, 26.234898019, -75.5),
        (-7.311959341, 18.331092995, -75.5),
        (-7.883477594, 16.203517283, -75.5),
        (-9.749279122, 17.77479066, -77.5),
        (-8.75, 20, -77.5),
        (-7.311959341, 18.331092995, -77.5),
        (-7.883477594, 16.203517283, -77.5),
        (-8.75, 20, -75.5),
        (-9.749279122, 17.77479066, -75.5),
        (-3.254128043, 13.242733491, -75.5),
        (-1.947058172, 11.469380768, -75.5),
        (-4.338837391, 10.990311321, -77.5),
        (-5.455535766, 13.158974528, -77.5),
        (-3.254128043, 13.242733491, -77.5),
        (-1.947058172, 11.469380768, -77.5),
        (-5.455535766, 13.158974528, -75.5),
        (-4.338837391, 10.990311321, -75.5),
        (1.084709348, 17.74757783, -75.5),
        (2.338086757, 17.068131941, -75.5),
        (2.169418696, 15.49515566, -77.5),
        (0.834453502, 16.344020329, -77.5),
        (1.084709348, 17.74757783, -77.5),
        (2.338086757, 17.068131941, -77.5),
        (0.834453502, 16.344020329, -75.5),
        (2.169418696, 15.49515566, -75.5),
        (-2.43731978, 19.443697665, -75.5),
        (-3.378633255, 18.372935978, -75.5),
        (-4.874639561, 18.88739533, -77.5),
        (-3.75, 20, -77.5),
        (-2.43731978, 19.443697665, -77.5),
        (-3.378633255, 18.372935978, -77.5),
        (-3.75, 20, -75.5),
        (-4.874639561, 18.88739533, -75.5),
        (-1.084709348, 17.74757783, -75.5),
        (-0.834453502, 16.344020329, -75.5),
        (-2.169418696, 15.49515566, -77.5),
        (-2.338086757, 17.068131941, -77.5),
        (-1.084709348, 17.74757783, -77.5),
        (-0.834453502, 16.344020329, -77.5),
        (-2.338086757, 17.068131941, -75.5),
        (-2.169418696, 15.49515566, -75.5),
        (-1.954578706, 21.558724505, -75.5),
        (-3.378633255, 21.627064022, -75.5),
        (-3.909157412, 23.117449009, -77.5),
        (-2.338086757, 22.931868059, -77.5),
        (-1.954578706, 21.558724505, -77.5),
        (-3.378633255, 21.627064022, -77.5),
        (-2.338086757, 22.931868059, -75.5),
        (-3.909157412, 23.117449009, -75.5),
        (0, 25, -77.5),
        (0.834453502, 23.655979671, -77.5),
        (0, 22.5, -75.5),
        (-0.834453502, 23.655979671, -75.5),
        (0, 22.5, -77.5),
        (-0.834453502, 23.655979671, -77.5),
        (0, 25, -75.5),
        (0.834453502, 23.655979671, -75.5),
        (3.254128043, 13.242733491, -75.5),
        (5.455535766, 13.158974528, -75.5),
        (4.338837391, 10.990311321, -77.5),
        (1.947058172, 11.469380768, -77.5),
        (3.254128043, 13.242733491, -77.5),
        (5.455535766, 13.158974528, -77.5),
        (1.947058172, 11.469380768, -75.5),
        (4.338837391, 10.990311321, -75.5),
    ]]
    fillet(fillet6_edges, radius=FILLET6_R)

    # Fillet7
    fillet7_edges = [part.edges().sort_by_distance(p)[0] for p in [
        (15.5, 40, 0.75),
        (0, 4, 77.5),
        (0, 40, -73.5),
        (-15.5, 40, 0.75),
        (-15.5, 20.75, 77.5),
        (-15.5, 39.267766953, 76.767766953),
        (15.5, 20.75, 77.5),
        (15.5, 39.267766953, 76.767766953),
    ]]
    fillet(fillet7_edges, radius=FILLET7_R)

    # Sketch17 → Cut-Extrude6 (cut)
    with BuildSketch(Plane.XZ):
        Polygon((-17, -77.5), (-17, 70.299999999), (-14.999999999, 71.3), (-14.999999999, 77.5), (14.999999999, 77.5), (14.999999999, 71.3), (17, 70.299999999), (17, -77.5), align=None)
    extrude(amount=-CUT_EXTRUDE6_DEPTH, mode=Mode.SUBTRACT)

    # Sketch18 → Cut-Extrude8 (cut, through all)
    with BuildSketch(Plane.XY):
        with Locations((0, 7.5)):
            Rectangle(SKETCH18_W, SKETCH18_H)
    extrude(amount=-CUT_EXTRUDE8_DEPTH, mode=Mode.SUBTRACT)

    # Sketch20 → Cut-Extrude11 (cut, two sides: drawn at the far end of the back side and taken through both)
    with BuildSketch(Plane.XY.offset(-CUT_EXTRUDE11_DEPTH_BACK)):
        with Locations((0, 23)):
            Rectangle(SKETCH20_W, SKETCH20_H)
    extrude(amount=CUT_EXTRUDE11_DEPTH + CUT_EXTRUDE11_DEPTH_BACK, mode=Mode.SUBTRACT)


with BuildPart() as body_2:
    # of the pieces the cut leaves, the one that is kept (cut_extrude11_keep)
    add(part.part.solids().sort_by_distance((14.5, 40, -75))[0])

    # Sketch21 → Cut-Extrude12 (cut, through all)
    with BuildSketch(Plane(origin=(0, 0, 0), x_dir=(0, 0, -1), z_dir=(1, 0, 0))):
        with Locations((0, 20)):
            Rectangle(SKETCH21_W, SKETCH21_H)
        with Locations((0, 5)):
            Rectangle(SKETCH21_W, SKETCH21_H_2)
    extrude(amount=CUT_EXTRUDE12_DEPTH, mode=Mode.SUBTRACT)


solid = body_2.part
